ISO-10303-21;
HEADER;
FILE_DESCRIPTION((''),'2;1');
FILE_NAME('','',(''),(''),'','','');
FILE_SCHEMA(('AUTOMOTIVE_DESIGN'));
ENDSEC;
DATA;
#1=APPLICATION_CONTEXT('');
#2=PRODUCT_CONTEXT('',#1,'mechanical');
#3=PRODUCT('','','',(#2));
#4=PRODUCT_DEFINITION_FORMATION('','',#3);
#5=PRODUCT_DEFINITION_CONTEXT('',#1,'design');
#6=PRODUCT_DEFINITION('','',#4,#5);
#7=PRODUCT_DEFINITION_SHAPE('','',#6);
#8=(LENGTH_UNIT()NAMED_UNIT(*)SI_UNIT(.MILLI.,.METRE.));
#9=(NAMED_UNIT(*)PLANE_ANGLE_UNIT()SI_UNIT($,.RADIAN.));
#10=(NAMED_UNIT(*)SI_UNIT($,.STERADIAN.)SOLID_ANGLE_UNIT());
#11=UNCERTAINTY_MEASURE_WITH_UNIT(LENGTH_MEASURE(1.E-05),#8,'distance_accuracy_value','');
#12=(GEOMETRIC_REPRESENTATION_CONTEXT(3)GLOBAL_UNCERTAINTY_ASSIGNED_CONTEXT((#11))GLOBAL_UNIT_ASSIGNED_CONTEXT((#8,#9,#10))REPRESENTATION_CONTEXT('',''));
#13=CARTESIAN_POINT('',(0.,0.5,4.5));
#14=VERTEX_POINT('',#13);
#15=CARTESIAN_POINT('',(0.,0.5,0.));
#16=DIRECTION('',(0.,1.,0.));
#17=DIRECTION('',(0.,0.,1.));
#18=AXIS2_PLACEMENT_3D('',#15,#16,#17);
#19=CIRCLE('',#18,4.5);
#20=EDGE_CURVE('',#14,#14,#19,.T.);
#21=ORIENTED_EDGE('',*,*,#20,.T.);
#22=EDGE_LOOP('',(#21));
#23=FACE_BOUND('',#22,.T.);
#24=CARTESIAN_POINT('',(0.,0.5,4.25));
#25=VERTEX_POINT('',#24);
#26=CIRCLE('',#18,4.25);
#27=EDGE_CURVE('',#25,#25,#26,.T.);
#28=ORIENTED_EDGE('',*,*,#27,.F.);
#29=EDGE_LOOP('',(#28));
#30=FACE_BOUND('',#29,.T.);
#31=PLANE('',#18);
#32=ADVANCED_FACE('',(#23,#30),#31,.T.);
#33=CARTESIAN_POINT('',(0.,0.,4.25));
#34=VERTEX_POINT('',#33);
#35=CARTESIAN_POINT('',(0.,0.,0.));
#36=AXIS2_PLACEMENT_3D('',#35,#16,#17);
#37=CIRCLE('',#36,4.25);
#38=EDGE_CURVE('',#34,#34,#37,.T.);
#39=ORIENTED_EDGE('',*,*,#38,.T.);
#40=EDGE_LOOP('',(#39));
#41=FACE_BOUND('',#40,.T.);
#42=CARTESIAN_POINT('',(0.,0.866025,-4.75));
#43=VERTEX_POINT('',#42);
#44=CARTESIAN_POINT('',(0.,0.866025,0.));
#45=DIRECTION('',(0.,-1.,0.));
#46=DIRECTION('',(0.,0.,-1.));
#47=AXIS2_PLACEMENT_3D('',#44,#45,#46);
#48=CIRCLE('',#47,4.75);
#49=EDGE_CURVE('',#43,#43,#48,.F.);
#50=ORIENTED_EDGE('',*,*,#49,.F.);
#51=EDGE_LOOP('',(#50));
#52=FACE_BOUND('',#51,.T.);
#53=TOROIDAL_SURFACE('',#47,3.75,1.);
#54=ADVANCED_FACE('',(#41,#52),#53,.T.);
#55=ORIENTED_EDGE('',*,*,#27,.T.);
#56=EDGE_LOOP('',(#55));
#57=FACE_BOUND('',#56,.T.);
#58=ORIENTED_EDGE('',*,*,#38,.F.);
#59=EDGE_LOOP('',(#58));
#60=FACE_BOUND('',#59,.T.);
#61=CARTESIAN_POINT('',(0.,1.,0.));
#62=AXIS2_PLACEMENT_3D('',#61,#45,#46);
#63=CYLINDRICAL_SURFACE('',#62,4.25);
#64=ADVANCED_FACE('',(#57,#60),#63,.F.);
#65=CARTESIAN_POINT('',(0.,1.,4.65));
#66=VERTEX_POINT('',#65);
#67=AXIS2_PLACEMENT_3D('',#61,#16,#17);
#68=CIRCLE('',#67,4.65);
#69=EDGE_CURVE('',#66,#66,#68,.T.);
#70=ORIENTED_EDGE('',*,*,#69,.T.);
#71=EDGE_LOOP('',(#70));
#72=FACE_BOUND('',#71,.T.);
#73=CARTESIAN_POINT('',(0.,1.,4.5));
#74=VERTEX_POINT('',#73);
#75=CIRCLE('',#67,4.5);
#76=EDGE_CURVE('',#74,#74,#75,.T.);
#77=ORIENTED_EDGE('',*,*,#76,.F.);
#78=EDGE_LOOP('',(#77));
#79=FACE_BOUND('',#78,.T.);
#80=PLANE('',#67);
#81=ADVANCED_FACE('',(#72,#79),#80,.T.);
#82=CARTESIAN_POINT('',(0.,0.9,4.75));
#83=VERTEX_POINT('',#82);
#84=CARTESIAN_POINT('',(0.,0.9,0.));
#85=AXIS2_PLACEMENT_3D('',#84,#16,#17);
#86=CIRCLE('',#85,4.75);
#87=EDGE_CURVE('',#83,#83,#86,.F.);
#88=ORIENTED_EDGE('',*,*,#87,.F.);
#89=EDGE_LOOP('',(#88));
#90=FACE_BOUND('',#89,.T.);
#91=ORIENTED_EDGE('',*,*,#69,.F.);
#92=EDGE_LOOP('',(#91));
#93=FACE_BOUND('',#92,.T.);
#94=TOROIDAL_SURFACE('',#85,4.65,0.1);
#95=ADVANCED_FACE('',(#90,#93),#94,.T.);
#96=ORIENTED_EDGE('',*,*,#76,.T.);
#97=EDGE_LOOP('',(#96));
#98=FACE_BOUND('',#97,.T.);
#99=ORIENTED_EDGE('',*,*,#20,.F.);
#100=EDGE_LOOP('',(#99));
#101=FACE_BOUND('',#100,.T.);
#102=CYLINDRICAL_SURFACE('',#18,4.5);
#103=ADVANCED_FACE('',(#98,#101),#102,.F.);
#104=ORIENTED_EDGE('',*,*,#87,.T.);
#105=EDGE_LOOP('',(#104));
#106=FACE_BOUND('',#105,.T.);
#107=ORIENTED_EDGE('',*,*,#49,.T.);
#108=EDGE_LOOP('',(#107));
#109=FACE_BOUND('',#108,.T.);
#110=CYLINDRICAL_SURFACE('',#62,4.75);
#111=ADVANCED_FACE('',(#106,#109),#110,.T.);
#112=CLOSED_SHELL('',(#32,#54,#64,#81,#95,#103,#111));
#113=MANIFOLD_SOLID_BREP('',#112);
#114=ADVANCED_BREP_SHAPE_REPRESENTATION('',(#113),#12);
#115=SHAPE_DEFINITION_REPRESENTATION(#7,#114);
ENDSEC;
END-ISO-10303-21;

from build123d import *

# Parameters (mm, degrees)
SKETCH1_R           = 4.75
SKETCH1_R_2         = 4.25
BOSS_EXTRUDE1_DEPTH = 1
SKETCH2_R           = 4.5
CUT_EXTRUDE1_DEPTH  = 0.5
FILLET1_R           = 1
FILLET2_R           = 0.1


with BuildPart() as part:
    # Sketch1 → Boss-Extrude1 (new body)
    with BuildSketch(Plane(origin=(0, 0, 0), x_dir=(1, 0, 0), z_dir=(0, 1, 0))):
        with Locations(Location((0, 0, 0), (0, 0, 270))):
            Circle(SKETCH1_R)
        with Locations(Location((0, 0, 0), (0, 0, 270))):
            Circle(SKETCH1_R_2, mode=Mode.SUBTRACT)
    extrude(amount=BOSS_EXTRUDE1_DEPTH)

    # Sketch2 → Cut-Extrude1 (cut)
    with BuildSketch(Plane(origin=(0, 1, 0), x_dir=(1, 0, 0), z_dir=(0, 1, 0))):
        with Locations(Location((0, 0, 0), (0, 0, 270))):
            Circle(SKETCH2_R)
    extrude(amount=-CUT_EXTRUDE1_DEPTH, mode=Mode.SUBTRACT)

    # Fillet1
    # the kernel refuses this fillet: 1 mm, written as the material it takes off along each edge
    with BuildSketch(Plane(origin=(0, 0, 0), x_dir=(0, 0, 1), z_dir=(-1, 0, 0))) as fillet1_piece_1:
        with BuildLine():
            CenterArc((3.75, 0.866025404), FILLET1_R, 300, 60)
            Line((4.25, 0), (4.26, -0.017320508))
            ThreePointArc((4.26, -0.017320508), (4.5, -0.02), (4.75, -0.02))
            Line((4.75, -0.02), (4.77, 0))
            Line((4.77, 0), (4.77, 0.866025404))
            Line((4.77, 0.866025404), (4.75, 0.866025404))
        make_face()
    revolve(axis=Axis((0, 0, 0), (0, 1, 0)), mode=Mode.SUBTRACT)

    # Fillet2
    fillet2_edges = [part.edges().sort_by_distance(p)[0] for p in [
        (0, 1, -4.75),
    ]]
    fillet(fillet2_edges, radius=FILLET2_R)


solid = part.part
